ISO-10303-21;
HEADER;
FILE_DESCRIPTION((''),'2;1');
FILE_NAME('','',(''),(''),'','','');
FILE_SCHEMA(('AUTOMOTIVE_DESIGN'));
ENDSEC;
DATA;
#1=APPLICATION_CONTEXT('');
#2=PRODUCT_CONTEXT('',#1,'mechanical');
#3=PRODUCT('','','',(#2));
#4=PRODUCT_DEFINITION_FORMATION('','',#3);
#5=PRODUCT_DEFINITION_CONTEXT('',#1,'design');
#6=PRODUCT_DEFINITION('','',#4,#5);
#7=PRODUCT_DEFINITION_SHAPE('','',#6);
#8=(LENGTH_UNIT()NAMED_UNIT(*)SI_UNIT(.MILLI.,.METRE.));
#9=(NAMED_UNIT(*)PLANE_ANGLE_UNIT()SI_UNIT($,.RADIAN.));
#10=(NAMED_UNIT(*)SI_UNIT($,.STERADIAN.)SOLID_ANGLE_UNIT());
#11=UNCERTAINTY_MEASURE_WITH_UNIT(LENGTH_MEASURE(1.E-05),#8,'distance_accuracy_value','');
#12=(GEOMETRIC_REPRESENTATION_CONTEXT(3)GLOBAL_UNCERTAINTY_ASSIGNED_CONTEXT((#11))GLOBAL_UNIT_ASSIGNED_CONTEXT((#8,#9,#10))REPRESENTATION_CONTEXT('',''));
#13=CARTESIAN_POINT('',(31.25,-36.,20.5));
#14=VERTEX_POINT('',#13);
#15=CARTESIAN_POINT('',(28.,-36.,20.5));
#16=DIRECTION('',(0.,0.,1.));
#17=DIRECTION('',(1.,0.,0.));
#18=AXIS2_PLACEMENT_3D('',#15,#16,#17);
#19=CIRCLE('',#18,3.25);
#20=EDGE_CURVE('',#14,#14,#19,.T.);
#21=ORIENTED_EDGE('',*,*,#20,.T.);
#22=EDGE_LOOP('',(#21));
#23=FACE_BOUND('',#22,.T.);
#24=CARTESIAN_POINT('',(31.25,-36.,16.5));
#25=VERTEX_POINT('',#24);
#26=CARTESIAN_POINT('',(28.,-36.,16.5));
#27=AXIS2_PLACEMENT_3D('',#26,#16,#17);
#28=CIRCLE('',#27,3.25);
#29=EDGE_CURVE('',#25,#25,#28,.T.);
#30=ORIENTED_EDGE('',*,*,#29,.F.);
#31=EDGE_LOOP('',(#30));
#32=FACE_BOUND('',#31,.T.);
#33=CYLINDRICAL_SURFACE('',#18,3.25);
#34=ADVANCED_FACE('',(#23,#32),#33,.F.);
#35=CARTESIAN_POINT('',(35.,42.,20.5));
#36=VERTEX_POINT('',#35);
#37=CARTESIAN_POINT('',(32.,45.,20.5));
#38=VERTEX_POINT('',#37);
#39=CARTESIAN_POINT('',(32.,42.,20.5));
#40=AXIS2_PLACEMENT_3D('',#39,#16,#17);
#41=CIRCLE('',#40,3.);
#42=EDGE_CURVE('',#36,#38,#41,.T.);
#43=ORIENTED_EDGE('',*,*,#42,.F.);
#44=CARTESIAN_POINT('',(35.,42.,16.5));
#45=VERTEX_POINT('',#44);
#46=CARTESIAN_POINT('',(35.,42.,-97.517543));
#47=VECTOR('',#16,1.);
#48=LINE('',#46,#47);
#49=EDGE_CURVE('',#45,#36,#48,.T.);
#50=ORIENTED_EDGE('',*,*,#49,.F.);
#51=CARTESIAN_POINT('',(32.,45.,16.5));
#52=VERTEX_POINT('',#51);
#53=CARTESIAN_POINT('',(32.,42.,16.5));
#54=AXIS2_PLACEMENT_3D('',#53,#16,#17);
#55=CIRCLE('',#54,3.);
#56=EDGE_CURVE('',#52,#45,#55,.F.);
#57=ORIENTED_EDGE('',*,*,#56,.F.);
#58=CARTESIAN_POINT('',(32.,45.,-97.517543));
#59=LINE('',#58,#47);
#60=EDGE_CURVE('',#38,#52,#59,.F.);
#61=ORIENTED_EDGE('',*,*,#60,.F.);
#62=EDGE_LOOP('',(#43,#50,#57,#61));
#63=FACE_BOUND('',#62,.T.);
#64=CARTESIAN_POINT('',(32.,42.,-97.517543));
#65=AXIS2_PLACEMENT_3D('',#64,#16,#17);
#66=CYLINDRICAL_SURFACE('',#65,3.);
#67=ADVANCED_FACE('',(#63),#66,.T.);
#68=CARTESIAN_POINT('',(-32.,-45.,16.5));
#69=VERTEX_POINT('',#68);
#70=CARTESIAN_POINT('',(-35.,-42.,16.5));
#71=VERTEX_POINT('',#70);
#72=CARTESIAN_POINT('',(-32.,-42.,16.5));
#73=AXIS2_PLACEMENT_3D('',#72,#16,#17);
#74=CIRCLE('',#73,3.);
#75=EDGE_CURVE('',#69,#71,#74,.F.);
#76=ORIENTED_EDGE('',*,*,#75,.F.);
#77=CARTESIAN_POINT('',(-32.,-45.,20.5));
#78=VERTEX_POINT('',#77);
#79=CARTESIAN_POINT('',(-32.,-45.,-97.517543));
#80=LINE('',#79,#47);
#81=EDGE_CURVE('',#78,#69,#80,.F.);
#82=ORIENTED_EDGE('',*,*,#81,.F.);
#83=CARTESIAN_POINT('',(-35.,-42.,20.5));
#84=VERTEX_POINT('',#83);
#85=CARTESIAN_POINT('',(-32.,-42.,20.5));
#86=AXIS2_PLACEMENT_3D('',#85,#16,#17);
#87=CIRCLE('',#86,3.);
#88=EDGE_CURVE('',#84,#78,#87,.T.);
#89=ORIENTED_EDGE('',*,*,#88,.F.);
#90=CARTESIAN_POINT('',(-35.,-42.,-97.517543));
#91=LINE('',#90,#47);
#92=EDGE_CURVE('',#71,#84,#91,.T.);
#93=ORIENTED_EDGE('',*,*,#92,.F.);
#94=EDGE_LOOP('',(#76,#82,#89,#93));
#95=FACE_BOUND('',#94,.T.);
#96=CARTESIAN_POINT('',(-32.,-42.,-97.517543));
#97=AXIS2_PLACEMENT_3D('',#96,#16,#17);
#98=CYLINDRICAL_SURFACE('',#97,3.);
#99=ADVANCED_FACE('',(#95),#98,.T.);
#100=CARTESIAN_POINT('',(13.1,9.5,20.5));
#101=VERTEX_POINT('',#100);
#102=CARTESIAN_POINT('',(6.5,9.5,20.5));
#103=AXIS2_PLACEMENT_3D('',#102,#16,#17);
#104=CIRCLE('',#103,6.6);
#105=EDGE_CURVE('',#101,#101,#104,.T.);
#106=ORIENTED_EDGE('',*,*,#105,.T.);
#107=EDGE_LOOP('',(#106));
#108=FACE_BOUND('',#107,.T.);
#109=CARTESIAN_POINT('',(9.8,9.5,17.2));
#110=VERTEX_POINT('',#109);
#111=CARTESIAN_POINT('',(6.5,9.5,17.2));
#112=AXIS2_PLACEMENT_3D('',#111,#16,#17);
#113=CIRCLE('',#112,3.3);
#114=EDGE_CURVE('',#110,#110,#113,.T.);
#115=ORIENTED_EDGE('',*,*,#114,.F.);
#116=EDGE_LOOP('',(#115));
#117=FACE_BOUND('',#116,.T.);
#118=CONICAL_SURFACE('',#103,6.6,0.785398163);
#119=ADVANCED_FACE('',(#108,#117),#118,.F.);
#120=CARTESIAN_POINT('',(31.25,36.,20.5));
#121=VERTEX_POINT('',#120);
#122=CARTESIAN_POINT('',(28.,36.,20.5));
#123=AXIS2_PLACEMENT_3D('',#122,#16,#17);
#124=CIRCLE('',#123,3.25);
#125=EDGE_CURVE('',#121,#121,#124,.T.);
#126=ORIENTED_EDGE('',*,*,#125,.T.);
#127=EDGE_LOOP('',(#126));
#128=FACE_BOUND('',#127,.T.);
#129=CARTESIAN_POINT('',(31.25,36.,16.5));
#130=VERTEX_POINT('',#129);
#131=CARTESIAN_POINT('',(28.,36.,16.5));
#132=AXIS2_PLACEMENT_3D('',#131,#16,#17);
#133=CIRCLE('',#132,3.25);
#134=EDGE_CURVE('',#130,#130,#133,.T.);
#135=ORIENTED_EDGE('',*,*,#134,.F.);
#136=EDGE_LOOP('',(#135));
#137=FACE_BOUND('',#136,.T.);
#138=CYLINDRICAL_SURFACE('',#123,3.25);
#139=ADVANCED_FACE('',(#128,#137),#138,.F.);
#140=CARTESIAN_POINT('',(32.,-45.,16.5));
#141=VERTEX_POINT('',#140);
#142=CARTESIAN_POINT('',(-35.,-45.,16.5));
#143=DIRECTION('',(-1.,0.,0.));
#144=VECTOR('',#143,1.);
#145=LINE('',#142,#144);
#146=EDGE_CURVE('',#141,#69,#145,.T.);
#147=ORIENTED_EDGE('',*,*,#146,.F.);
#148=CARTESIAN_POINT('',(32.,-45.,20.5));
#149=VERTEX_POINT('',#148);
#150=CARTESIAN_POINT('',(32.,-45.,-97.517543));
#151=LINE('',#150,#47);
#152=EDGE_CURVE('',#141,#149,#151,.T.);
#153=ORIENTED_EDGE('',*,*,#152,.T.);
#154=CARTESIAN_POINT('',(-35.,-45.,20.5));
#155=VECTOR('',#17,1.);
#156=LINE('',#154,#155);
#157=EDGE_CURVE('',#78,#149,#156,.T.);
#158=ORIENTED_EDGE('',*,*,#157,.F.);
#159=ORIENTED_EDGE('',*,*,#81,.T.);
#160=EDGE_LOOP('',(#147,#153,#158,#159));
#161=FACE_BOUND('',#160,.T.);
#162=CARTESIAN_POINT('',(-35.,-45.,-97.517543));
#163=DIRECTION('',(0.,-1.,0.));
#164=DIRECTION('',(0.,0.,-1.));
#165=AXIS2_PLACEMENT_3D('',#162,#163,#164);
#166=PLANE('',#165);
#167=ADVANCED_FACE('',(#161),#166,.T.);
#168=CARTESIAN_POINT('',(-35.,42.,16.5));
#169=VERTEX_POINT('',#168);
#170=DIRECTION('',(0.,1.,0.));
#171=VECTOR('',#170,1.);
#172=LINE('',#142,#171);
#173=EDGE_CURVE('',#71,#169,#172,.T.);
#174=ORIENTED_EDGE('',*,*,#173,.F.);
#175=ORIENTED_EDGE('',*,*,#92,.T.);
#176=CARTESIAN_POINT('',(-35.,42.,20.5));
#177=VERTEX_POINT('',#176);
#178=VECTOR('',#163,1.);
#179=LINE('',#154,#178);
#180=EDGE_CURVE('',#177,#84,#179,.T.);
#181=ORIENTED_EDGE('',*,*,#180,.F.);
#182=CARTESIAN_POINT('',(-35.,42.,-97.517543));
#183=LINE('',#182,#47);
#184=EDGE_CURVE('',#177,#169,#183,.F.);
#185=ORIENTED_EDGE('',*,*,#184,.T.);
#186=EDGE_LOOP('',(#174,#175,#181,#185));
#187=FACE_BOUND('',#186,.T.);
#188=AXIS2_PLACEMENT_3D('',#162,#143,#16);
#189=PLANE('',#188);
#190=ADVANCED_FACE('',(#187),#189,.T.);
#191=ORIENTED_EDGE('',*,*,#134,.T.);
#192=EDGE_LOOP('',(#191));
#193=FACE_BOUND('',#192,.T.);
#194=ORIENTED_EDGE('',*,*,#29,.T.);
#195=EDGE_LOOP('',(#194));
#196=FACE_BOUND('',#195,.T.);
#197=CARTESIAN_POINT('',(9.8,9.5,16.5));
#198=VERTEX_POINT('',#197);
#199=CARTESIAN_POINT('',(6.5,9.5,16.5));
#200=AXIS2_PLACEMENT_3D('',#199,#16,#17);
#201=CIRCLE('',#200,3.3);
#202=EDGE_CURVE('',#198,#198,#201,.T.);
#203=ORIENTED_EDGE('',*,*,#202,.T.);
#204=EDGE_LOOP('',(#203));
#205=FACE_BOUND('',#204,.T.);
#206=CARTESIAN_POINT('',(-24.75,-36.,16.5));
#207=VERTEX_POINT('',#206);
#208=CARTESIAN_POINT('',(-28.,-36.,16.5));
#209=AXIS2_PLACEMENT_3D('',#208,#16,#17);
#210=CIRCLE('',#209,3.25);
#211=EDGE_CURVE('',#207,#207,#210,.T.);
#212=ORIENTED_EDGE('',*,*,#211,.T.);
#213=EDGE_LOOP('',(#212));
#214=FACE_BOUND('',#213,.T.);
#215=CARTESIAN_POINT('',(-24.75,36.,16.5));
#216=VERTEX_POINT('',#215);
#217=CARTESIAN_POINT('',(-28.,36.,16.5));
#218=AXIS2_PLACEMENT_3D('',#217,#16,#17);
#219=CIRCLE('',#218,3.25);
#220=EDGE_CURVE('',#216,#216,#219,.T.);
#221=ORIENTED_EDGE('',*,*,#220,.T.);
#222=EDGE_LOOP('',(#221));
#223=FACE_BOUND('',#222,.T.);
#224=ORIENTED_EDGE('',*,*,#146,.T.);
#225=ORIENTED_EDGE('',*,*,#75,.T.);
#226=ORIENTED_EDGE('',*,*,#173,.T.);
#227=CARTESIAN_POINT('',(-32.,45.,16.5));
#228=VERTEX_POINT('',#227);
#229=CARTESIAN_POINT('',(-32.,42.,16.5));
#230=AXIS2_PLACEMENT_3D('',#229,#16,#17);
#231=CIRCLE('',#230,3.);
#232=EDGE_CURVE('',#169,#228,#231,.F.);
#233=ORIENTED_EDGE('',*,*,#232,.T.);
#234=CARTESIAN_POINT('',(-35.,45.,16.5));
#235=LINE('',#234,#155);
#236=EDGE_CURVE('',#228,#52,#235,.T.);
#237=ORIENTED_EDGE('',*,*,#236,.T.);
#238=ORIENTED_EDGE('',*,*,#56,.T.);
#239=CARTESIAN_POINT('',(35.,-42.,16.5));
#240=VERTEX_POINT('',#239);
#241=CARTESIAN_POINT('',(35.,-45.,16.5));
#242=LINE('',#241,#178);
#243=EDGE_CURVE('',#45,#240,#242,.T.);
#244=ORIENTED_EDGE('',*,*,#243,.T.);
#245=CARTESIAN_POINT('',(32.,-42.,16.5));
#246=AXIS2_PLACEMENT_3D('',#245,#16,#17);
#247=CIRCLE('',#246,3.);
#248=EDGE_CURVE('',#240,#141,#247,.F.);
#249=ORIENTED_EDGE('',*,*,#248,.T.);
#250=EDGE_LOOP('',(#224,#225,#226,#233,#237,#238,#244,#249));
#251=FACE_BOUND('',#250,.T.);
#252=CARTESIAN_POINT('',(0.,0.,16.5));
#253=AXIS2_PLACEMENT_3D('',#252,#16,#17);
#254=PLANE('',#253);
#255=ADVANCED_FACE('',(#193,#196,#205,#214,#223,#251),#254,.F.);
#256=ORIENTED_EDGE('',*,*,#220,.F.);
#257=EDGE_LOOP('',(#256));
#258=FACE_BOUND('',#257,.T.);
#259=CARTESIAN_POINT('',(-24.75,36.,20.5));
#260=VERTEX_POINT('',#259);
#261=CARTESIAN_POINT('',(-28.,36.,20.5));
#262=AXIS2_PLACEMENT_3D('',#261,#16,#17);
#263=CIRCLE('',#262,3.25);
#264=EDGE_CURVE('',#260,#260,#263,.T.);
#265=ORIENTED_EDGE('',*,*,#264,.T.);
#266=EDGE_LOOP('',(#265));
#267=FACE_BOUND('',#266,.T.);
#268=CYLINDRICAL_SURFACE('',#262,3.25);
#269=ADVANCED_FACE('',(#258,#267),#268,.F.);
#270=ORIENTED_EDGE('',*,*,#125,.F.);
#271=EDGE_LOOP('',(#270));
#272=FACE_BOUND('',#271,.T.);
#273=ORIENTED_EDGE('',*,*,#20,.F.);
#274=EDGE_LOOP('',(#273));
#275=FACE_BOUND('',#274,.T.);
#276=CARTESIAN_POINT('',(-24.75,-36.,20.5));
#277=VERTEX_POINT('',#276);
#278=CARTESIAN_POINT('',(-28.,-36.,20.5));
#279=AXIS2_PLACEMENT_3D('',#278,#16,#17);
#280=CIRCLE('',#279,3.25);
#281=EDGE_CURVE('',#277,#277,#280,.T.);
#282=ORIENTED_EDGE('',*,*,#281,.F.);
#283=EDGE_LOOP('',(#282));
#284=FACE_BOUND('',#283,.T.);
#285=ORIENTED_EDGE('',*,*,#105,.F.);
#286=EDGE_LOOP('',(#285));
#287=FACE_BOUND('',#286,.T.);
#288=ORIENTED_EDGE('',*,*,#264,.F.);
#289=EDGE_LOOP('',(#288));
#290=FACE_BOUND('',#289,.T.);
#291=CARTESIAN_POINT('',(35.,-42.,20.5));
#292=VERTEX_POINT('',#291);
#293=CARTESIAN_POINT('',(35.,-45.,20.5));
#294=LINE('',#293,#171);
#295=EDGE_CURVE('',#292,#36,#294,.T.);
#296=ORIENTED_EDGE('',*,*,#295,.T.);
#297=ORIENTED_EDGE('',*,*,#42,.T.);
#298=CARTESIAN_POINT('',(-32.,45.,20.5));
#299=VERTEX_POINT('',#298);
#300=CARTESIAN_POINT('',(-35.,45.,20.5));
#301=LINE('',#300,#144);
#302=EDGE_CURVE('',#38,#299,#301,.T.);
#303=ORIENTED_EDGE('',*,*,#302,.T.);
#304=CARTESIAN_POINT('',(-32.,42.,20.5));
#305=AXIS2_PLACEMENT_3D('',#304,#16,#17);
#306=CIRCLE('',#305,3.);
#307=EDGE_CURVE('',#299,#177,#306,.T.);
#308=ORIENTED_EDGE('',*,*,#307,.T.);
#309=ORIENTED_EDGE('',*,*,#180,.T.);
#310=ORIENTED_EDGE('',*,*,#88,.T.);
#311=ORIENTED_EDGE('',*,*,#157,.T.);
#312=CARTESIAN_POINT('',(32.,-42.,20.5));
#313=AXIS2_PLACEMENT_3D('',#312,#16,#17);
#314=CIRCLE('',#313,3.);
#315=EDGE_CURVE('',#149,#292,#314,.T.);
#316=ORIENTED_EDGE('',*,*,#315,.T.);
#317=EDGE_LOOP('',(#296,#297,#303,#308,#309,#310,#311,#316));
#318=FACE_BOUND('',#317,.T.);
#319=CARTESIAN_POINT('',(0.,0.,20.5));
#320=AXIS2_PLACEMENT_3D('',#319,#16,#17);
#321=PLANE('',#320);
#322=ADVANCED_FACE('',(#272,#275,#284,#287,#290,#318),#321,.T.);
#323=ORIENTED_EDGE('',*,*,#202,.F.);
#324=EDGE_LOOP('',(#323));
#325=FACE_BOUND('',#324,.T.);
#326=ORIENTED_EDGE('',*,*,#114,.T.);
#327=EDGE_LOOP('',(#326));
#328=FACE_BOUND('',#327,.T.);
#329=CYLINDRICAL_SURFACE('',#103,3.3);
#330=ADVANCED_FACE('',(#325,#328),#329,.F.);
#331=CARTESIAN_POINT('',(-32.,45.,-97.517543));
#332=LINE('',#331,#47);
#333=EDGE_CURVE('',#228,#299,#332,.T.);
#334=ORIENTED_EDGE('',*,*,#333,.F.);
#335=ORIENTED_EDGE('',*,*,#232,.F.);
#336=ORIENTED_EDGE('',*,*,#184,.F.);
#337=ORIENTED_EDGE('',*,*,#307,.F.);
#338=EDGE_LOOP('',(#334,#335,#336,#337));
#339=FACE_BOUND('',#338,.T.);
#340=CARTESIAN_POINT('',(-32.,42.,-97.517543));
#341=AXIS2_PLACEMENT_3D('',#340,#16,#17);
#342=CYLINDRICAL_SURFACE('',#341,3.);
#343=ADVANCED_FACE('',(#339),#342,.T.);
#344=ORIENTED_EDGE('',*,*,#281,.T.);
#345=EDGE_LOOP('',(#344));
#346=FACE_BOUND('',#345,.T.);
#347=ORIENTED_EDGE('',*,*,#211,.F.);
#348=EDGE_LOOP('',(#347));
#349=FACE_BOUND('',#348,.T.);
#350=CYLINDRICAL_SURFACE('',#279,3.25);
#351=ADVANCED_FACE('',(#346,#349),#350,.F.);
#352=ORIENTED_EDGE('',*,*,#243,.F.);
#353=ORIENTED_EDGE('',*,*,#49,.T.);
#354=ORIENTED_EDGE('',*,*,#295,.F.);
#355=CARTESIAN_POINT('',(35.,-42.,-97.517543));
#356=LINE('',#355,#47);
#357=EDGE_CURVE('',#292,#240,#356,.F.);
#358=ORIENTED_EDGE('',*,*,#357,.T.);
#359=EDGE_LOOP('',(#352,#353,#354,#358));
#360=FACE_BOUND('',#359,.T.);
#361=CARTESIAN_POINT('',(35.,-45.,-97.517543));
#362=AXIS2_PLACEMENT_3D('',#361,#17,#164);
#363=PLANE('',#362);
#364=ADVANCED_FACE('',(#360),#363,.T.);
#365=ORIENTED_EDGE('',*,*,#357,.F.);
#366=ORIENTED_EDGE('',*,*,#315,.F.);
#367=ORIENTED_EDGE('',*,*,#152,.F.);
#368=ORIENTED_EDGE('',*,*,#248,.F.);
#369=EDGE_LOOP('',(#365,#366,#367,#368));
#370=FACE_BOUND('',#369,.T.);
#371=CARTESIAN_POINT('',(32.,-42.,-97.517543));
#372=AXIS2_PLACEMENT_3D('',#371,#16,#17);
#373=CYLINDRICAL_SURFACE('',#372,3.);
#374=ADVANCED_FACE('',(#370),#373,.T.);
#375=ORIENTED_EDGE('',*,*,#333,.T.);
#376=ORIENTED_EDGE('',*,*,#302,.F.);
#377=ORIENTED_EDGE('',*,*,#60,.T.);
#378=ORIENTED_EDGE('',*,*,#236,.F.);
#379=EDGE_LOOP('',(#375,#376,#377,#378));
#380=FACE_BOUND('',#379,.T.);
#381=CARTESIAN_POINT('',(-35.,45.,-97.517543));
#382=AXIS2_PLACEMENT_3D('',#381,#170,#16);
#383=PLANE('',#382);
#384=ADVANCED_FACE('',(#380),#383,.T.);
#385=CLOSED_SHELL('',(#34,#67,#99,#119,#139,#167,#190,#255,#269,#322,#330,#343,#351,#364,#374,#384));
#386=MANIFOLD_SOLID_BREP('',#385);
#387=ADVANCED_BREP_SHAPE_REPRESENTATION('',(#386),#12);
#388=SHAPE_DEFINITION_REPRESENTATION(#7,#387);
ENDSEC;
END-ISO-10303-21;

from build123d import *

# Parameters (mm, degrees)
SKETCH_1_W                  = 55
SKETCH_1_H                  = 60
EXTRUDE_1_DEPTH             = 16.5
HOLE_WIZARD_3_6_3_6_1_D     = 3.6
HOLE_WIZARD_3_6_3_6_1_DEPTH = 25
HOLE_WIZARD_3_6_3_6_1_TIP   = 1.081549114
HOLE_WIZARD_M2_5_1_D        = 2.05
HOLE_WIZARD_M2_5_1_DEPTH    = 14
HOLE_WIZARD_M2_5_1_TIP      = 0.615882135
SKETCH_8_W                  = 35
SKETCH_8_H                  = 20.4
CUT_EXTRUDE_1_DEPTH         = 44.914690025
CUT_EXTRUDE_START           = 2.5
SKETCH_9_W                  = 20
SKETCH_9_H                  = 6
CUT_EXTRUDE_2_DEPTH         = 42.414690025
SHELL_START                 = 1.8
SHELL_1_DEPTH               = 14.7
EXTRUDE_2_DEPTH             = 4
SKETCH_16_R                 = 3
CUT_EXTRUDE_4_DEPTH         = 12
CUT_EXTRUDE_5_DEPTH         = 45.787721532
CUT_EXTRUDE_5_DEPTH_BACK    = 45.787721532
SKETCH_17_R                 = 2.5
FILLET_1_R                  = 0.5
FILLET_2_R                  = 0.5
SKETCH_21_W                 = 70
SKETCH_21_H                 = 90
EXTRUDE_3_DEPTH             = 4
SKETCH_24_R                 = 8.656208536
SKETCH_24_R_2               = 4.782814597
EXTRUDE_4_DEPTH             = 4
HOLE_WIZARD_6_5_6_5_1_D     = 6.5
HOLE_WIZARD_1_D             = 6.6
HOLE_WIZARD_1_DEPTH         = 17
HOLE_WIZARD_1_CSINK_D       = 13.2
HOLE_WIZARD_1_CSINK_ANGLE   = 90
HOLE_WIZARD_1_TIP           = 1.982840043
FILLET_3_R                  = 3


# Read off the part's stored shape, not the designer's step: 抽壳1
with BuildPart() as part:
    # 草图1 → 凸台-拉伸1 (new body)
    with BuildSketch(Plane.XY):
        Rectangle(SKETCH_1_W, SKETCH_1_H)
    extrude(amount=EXTRUDE_1_DEPTH)

    # Ø3.6 (3.6) 直径孔1
    with Locations(Plane.XY.offset(16.5)):
        with Locations((-24, 21.5), (24, 21.5), (24, -6), (-15, -26.5)):
            Hole(HOLE_WIZARD_3_6_3_6_1_D / 2, depth=HOLE_WIZARD_3_6_3_6_1_DEPTH)
            with Locations((0, 0, -(HOLE_WIZARD_3_6_3_6_1_DEPTH + HOLE_WIZARD_3_6_3_6_1_TIP / 2))):  # 118° drill point
                Cone(0, HOLE_WIZARD_3_6_3_6_1_D / 2, HOLE_WIZARD_3_6_3_6_1_TIP, mode=Mode.SUBTRACT)

    # M2.5 螺纹孔1
    with Locations(Plane.XY.offset(16.5)):
        with Locations((-24, 26.5), (24, 26.5), (24, -1), (-22.5, -26.5)):
            Hole(HOLE_WIZARD_M2_5_1_D / 2, depth=HOLE_WIZARD_M2_5_1_DEPTH)
            with Locations((0, 0, -(HOLE_WIZARD_M2_5_1_DEPTH + HOLE_WIZARD_M2_5_1_TIP / 2))):  # 118° drill point
                Cone(0, HOLE_WIZARD_M2_5_1_D / 2, HOLE_WIZARD_M2_5_1_TIP, mode=Mode.SUBTRACT)

    # 草图8 → 切除-拉伸1 (cut, through all)
    with BuildSketch(Plane.XY.offset(16.5)):
        with Locations((10, -19.8)):
            Rectangle(SKETCH_8_W, SKETCH_8_H)
    extrude(amount=-CUT_EXTRUDE_1_DEPTH, mode=Mode.SUBTRACT)

    # 草图9 → 切除-拉伸2 (cut, through all)
    with BuildSketch(Plane(origin=(0, 0, 16.5), x_dir=(-1, 0, 0), z_dir=(0, 0, -1)).offset(CUT_EXTRUDE_START)):
        with Locations((17.5, -27)):
            Rectangle(SKETCH_9_W, SKETCH_9_H)
    extrude(amount=CUT_EXTRUDE_2_DEPTH, mode=Mode.SUBTRACT)

    # 抽壳1 outline → 抽壳1 (cut)
    with BuildSketch(Plane.XY.offset(SHELL_START)):
        with BuildLine():
            ThreePointArc((-21.743758657, 28.2), (-21.182110509, 26.299690696), (-22.006919283, 24.4979375))
            ThreePointArc((-22.006919283, 24.4979375), (-20.910890356, 19.651378458), (-25.7, 18.326673669))
            Line((-25.7, 18.326673669), (-25.7, -22.2))
            Line((-25.7, -22.2), (-9.3, -22.2))
            Line((-9.3, -22.2), (-9.3, -7.8))
            Line((-9.3, -7.8), (20.882308546, -7.8))
            ThreePointArc((20.882308546, -7.8), (20.494996561, -5.178446051), (22.006919283, -3.0020625))
            ThreePointArc((22.006919283, -3.0020625), (21.865811165, 0.8509087), (25.7, 1.256241343))
            Line((25.7, 1.256241343), (25.7, 18.326673669))
            ThreePointArc((25.7, 18.326673669), (20.910890356, 19.651378458), (22.006919283, 24.4979375))
            ThreePointArc((22.006919283, 24.4979375), (21.182110509, 26.299690696), (21.743758657, 28.2))
            Line((21.743758657, 28.2), (-21.743758657, 28.2))
        make_face()
    extrude(amount=SHELL_1_DEPTH, mode=Mode.SUBTRACT)

    # 草图16 → 切除-拉伸4 (cut)
    with BuildSketch(Plane(origin=(-7.5, 0, 0), x_dir=(0, 0, -1), z_dir=(1, 0, 0))):
        with Locations(Location((-8, -18, 0), (0, 0, 90))):
            Circle(SKETCH_16_R)
    extrude(amount=-CUT_EXTRUDE_4_DEPTH, mode=Mode.SUBTRACT)


with BuildPart() as body_2:
    # 草图10 → 凸台-拉伸2 (new body)
    with BuildSketch(Plane.XY.offset(16.5)):
        Polygon((-27.5, -30), (-7.5, -30), (-7.5, -9.6), (27.5, -9.6), (27.5, 30), (-27.5, 30), align=None)
    extrude(amount=EXTRUDE_2_DEPTH)


with BuildPart() as cut_extrude_5_tool:
    # 草图17 → 切除-拉伸5 (new, two sides: drawn at the far end of the back side and taken through both)
    with BuildSketch(Plane.XY.offset(1.8).offset(-CUT_EXTRUDE_5_DEPTH_BACK)):
        with Locations((6.5, 9.5)):
            Circle(SKETCH_17_R)
    extrude(amount=CUT_EXTRUDE_5_DEPTH + CUT_EXTRUDE_5_DEPTH_BACK)


with BuildPart() as part_1:
    add(part.part)

    # 切除-拉伸5: cut by cut_extrude_5_tool
    add(cut_extrude_5_tool.part, mode=Mode.SUBTRACT)

    # 圆角1
    fillet_1_edges = [part_1.edges().sort_by_distance(p)[0] for p in [
        (-27.5, 3, 0),
        (0, 30, 0),
        (27.5, 10.2, 0),
        (27.5, -9.6, 8.25),
        (-7.5, -16.8, 0),
        (10, -9.6, 0),
        (-7.5, -9.6, 8.25),
        (-7.5, -30, 15.25),
        (-27.5, -30, 15.25),
        (-27.5, 30, 8.25),
        (27.5, 30, 8.25),
        (-17.5, -24, 0),
        (-7.5, -24, 7),
        (-27.5, -24, 7),
    ]]
    fillet(fillet_1_edges, radius=FILLET_1_R)


with BuildPart() as body_2_1:
    add(body_2.part)

    # 切除-拉伸5: cut by cut_extrude_5_tool
    add(cut_extrude_5_tool.part, mode=Mode.SUBTRACT)

    # 圆角2
    fillet_2_edges = [body_2_1.edges().sort_by_distance(p)[0] for p in [
        (-27.5, 30, 18.5),
        (27.5, 30, 18.5),
        (27.5, -9.6, 18.5),
        (-7.5, -9.6, 18.5),
        (-7.5, -30, 18.5),
        (-27.5, -30, 18.5),
    ]]
    fillet(fillet_2_edges, radius=FILLET_2_R)

    # 草图21 → 凸台-拉伸3 (add)
    with BuildSketch(Plane.XY.offset(20.5)):
        Rectangle(SKETCH_21_W, SKETCH_21_H)
        with BuildLine():
            Line((-27, -30), (-8, -30))
            ThreePointArc((-8, -30), (-7.646446609, -29.853553391), (-7.5, -29.5))
            Line((-7.5, -29.5), (-7.5, -10.1))
            ThreePointArc((-7.5, -10.1), (-7.353553391, -9.746446609), (-7, -9.6))
            Line((-7, -9.6), (27, -9.6))
            ThreePointArc((27, -9.6), (27.353553391, -9.453553391), (27.5, -9.1))
            Line((27.5, -9.1), (27.5, 29.5))
            ThreePointArc((27.5, 29.5), (27.353553391, 29.853553391), (27, 30))
            Line((27, 30), (-27, 30))
            ThreePointArc((-27, 30), (-27.353553391, 29.853553391), (-27.5, 29.5))
            Line((-27.5, 29.5), (-27.5, -29.5))
            ThreePointArc((-27.5, -29.5), (-27.353553391, -29.853553391), (-27, -30))
        make_face(mode=Mode.SUBTRACT)
    extrude(amount=-EXTRUDE_3_DEPTH)

    # 草图24 → 凸台-拉伸4 (add)
    with BuildSketch(Plane(origin=(0, 0, 16.5), x_dir=(-1, 0, 0), z_dir=(0, 0, -1))):
        with Locations((-6.5, 9.5)):
            Circle(SKETCH_24_R)
        with Locations((-6.5, 9.5)):
            Circle(SKETCH_24_R_2, mode=Mode.SUBTRACT)
    extrude(amount=-EXTRUDE_4_DEPTH)

    # Ø6.5 (6.5) 直径孔1 (through all)
    with Locations(Plane.XY.offset(20.5)):
        with Locations((-28, 36), (28, 36), (28, -36), (-28, -36)):
            Hole(HOLE_WIZARD_6_5_6_5_1_D / 2)

    # 打孔尺寸(%根据十字)槽沉头木螺钉的类型1
    with Locations(Plane.XY.offset(20.5)):
        with Locations((6.5, 9.5)):
            CounterSinkHole(HOLE_WIZARD_1_D / 2, HOLE_WIZARD_1_CSINK_D / 2, depth=HOLE_WIZARD_1_DEPTH, counter_sink_angle=HOLE_WIZARD_1_CSINK_ANGLE)
            with Locations((0, 0, -(HOLE_WIZARD_1_DEPTH + HOLE_WIZARD_1_TIP / 2))):  # 118° drill point
                Cone(0, HOLE_WIZARD_1_D / 2, HOLE_WIZARD_1_TIP, mode=Mode.SUBTRACT)

    # 圆角3
    fillet_3_edges = [body_2_1.edges().sort_by_distance(p)[0] for p in [
        (-35, 45, 18.5),
        (-35, -45, 18.5),
        (35, -45, 18.5),
        (35, 45, 18.5),
    ]]
    fillet(fillet_3_edges, radius=FILLET_3_R)


solid = body_2_1.part
